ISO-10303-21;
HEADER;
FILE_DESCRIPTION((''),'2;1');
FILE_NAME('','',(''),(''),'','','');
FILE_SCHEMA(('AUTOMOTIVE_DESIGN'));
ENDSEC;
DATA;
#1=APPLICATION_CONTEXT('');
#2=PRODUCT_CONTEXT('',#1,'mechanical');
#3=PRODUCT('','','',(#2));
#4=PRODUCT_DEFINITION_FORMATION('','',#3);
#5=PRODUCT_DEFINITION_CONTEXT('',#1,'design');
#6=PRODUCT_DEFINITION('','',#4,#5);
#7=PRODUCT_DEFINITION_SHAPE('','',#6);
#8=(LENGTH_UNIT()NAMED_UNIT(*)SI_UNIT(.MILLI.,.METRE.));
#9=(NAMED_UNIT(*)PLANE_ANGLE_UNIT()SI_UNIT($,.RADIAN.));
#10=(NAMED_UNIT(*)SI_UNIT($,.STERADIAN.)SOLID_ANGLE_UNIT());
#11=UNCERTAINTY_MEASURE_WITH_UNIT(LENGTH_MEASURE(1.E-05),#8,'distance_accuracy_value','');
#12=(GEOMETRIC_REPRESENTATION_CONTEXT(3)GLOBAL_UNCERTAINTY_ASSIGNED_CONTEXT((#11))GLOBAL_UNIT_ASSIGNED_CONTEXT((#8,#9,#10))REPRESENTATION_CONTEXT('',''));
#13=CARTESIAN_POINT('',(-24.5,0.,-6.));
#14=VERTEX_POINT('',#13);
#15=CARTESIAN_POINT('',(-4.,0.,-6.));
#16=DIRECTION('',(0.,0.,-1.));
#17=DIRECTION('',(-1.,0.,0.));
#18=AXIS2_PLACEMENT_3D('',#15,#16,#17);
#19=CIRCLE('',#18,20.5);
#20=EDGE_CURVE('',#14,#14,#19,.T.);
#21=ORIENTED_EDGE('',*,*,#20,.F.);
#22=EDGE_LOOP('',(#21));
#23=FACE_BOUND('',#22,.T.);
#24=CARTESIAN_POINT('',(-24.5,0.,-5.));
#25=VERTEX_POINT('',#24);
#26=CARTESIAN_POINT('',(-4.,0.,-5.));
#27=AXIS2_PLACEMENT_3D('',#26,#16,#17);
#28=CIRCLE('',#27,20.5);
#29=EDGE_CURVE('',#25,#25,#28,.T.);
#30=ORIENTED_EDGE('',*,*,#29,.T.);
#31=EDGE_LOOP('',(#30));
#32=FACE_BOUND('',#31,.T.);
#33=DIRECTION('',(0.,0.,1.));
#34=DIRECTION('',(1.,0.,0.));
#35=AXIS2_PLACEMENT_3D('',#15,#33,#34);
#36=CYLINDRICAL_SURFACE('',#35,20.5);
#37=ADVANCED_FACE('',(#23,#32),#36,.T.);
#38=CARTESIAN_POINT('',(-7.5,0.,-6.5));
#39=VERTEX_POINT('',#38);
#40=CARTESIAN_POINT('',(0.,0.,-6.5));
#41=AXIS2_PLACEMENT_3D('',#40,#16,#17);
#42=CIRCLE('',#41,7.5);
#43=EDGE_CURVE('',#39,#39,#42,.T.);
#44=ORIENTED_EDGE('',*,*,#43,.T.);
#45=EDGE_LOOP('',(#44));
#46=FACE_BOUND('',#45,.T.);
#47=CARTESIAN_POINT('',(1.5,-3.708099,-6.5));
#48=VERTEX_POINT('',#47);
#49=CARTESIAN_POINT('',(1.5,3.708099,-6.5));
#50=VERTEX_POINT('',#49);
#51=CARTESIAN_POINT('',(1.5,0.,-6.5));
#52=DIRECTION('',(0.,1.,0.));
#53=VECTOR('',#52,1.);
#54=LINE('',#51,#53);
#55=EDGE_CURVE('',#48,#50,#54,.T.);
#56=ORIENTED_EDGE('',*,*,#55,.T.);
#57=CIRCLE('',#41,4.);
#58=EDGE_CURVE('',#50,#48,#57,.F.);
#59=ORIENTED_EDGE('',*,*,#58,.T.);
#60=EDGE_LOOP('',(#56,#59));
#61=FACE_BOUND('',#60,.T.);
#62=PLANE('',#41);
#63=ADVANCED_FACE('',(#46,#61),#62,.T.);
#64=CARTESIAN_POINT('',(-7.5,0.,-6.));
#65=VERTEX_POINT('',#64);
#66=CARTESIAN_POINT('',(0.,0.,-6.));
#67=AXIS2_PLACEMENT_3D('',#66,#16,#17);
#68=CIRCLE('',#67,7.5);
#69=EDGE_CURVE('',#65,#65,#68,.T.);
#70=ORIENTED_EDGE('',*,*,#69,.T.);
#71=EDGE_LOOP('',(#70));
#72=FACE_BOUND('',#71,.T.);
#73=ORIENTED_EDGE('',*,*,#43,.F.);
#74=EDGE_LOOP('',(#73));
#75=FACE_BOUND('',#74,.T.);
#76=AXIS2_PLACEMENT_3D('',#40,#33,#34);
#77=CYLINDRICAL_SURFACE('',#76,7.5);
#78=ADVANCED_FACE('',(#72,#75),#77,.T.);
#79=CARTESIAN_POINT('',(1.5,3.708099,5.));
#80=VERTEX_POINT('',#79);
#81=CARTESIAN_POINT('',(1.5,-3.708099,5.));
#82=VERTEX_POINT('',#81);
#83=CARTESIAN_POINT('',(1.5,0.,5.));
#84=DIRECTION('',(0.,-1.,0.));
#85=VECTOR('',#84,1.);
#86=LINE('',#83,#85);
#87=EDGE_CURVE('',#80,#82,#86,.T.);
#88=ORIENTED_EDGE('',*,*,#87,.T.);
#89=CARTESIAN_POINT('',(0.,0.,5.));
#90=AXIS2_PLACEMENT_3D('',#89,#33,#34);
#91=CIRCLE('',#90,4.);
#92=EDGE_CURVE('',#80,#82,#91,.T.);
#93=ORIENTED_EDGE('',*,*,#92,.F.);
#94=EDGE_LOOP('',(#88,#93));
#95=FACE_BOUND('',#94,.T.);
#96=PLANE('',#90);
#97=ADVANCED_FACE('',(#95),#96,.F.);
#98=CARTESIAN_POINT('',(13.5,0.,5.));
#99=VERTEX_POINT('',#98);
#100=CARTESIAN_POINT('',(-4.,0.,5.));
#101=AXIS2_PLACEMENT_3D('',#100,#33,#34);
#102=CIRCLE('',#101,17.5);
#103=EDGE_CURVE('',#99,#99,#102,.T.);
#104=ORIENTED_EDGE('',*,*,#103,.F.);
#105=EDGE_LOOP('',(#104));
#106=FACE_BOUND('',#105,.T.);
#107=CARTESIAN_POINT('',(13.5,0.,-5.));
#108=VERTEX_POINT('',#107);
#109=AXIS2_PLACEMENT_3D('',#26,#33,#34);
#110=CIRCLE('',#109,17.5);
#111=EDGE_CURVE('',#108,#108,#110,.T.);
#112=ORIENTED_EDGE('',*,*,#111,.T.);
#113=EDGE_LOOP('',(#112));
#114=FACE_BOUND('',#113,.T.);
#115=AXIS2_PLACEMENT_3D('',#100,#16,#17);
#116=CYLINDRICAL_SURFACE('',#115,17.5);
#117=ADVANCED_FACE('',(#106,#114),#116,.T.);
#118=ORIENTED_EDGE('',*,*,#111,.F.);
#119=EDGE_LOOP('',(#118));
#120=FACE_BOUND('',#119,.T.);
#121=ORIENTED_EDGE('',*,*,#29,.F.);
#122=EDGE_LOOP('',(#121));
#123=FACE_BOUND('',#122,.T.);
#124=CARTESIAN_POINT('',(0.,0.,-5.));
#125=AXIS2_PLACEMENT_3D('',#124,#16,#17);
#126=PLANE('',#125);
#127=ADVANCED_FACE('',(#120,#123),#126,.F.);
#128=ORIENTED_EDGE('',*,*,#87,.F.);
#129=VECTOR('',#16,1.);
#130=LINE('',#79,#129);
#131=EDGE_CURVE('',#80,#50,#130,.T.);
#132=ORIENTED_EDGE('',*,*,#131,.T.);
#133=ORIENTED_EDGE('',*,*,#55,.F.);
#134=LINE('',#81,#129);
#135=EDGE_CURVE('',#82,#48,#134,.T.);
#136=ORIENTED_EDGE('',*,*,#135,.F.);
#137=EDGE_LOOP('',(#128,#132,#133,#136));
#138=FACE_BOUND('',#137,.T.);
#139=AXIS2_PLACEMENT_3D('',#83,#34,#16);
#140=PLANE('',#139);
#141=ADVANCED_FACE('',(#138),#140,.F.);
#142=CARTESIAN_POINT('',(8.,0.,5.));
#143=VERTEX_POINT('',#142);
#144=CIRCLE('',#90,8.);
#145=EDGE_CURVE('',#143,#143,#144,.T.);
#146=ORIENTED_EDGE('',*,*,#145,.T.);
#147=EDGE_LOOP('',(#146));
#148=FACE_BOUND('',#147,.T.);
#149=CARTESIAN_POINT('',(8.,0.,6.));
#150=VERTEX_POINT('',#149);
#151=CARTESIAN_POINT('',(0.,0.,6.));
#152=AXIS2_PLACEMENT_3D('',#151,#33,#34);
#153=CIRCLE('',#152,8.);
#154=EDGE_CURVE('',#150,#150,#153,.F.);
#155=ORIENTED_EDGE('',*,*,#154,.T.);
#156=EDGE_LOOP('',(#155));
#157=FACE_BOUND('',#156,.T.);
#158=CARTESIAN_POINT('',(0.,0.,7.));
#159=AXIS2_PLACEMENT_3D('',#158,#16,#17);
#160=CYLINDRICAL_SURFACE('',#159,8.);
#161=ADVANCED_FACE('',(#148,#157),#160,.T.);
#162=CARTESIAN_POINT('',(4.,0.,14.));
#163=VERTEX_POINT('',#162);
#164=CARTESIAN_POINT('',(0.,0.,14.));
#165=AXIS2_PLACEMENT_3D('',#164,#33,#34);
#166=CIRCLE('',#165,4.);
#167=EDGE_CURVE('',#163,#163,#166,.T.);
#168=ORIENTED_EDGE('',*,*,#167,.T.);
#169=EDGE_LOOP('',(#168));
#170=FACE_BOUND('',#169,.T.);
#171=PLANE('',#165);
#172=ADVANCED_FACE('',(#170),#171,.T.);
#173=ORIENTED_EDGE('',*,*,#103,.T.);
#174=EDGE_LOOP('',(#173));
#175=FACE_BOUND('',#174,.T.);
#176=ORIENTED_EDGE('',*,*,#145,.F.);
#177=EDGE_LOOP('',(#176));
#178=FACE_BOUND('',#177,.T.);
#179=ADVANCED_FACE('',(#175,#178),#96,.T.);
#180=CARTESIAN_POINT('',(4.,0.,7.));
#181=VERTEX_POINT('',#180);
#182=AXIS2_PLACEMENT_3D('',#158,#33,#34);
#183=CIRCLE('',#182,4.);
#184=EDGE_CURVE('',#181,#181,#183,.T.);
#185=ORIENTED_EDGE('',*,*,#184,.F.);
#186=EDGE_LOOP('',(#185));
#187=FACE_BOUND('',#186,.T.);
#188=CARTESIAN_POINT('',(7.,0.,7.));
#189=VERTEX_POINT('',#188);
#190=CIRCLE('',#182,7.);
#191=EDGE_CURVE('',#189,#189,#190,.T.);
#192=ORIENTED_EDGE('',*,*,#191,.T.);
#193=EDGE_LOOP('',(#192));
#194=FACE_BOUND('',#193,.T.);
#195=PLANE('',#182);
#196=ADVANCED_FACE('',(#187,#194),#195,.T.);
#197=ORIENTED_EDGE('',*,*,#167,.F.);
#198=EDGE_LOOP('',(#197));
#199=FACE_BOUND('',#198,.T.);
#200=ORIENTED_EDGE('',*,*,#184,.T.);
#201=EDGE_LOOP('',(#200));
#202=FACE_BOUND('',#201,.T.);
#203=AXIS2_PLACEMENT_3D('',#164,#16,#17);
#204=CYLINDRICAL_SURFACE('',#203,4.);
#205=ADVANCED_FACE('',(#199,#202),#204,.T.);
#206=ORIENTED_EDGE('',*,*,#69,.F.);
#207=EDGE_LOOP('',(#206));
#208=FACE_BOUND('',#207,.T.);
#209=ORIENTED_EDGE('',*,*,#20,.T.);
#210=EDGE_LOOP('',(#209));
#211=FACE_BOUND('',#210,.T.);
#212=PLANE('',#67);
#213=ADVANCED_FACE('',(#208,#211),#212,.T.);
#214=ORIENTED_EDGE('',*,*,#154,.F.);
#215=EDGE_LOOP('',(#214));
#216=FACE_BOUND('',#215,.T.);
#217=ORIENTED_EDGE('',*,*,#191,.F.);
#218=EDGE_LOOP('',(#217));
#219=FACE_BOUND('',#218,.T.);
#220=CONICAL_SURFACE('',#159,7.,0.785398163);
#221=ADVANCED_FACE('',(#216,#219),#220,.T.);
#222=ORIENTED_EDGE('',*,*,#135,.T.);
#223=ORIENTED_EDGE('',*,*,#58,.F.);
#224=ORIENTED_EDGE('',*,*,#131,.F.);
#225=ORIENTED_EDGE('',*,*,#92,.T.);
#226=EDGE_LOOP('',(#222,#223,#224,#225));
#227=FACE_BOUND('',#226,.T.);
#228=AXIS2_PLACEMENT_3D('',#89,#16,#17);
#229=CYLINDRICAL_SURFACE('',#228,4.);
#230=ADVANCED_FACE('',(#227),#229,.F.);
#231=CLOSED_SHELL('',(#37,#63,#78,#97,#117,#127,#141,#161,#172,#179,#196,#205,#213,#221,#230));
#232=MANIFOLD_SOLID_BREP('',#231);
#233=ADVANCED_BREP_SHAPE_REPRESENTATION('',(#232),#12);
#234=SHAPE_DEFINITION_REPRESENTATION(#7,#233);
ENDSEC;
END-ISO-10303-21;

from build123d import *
from build123d.topology import SkipClean

# Parameters (mm, degrees)
SKETCH1_R               = 17.5
BOSS_EXTRUDE1_DEPTH     = 5
SKETCH3_R               = 20.5
SKETCH3_R_2             = 17.5
BOSS_EXTRUDE3_DEPTH     = 1
BOSS_EXTRUDE2_OUTLINE_R = 7.5
BOSS_EXTRUDE2_DEPTH     = 0.5
SKETCH4_R               = 8
BOSS_EXTRUDE5_DEPTH     = 2
BOSS_EXTRUDE6_START     = 7
SKETCH5_R               = 4
BOSS_EXTRUDE6_DEPTH     = 7
CHAMFER1_SIZE           = 1


# Read off the part's stored shape, not the designer's step: Boss-Extrude2
with BuildPart() as part:
    # Sketch1 → Boss-Extrude1 (new, symmetric)
    with BuildSketch(Plane.XY):
        with Locations((-4, 0)):
            Circle(SKETCH1_R)
        with BuildLine():
            Line((1.5, 3.708099244), (1.5, -3.708099244))
            ThreePointArc((1.5, -3.708099244), (-4, 0), (1.5, 3.708099244))
        make_face(mode=Mode.SUBTRACT)
    extrude(amount=BOSS_EXTRUDE1_DEPTH, both=True)

    # Sketch3 → Boss-Extrude3 (add)
    # profile 1 of 2: a face of its own
    with SkipClean():  # the faces are left unmerged after this step: merging them gives an invalid solid
        with BuildSketch(Plane(origin=(0, 0, -5), x_dir=(-1, 0, 0), z_dir=(0, 0, -1))):
            with Locations((4, 0)):
                Circle(SKETCH3_R)
            with Locations(Location((4, 0, 0), (0, 0, 180))):
                Circle(SKETCH3_R_2, mode=Mode.SUBTRACT)
        # profile 2 of 2: a face of its own
        with BuildSketch(Plane(origin=(0, 0, -5), x_dir=(-1, 0, 0), z_dir=(0, 0, -1))):
            with Locations(Location((4, 0, 0), (0, 0, 180))):
                Circle(SKETCH3_R_2)
            with BuildLine():
                Line((-1.5, -3.708099244), (-1.5, 3.708099244))
                ThreePointArc((-1.5, 3.708099244), (4, 0), (-1.5, -3.708099244))
            make_face(mode=Mode.SUBTRACT)
        extrude(amount=BOSS_EXTRUDE3_DEPTH)

    # Boss-Extrude2 outline → Boss-Extrude2 (add)
    with SkipClean():  # the faces are left unmerged after this step: merging them gives an invalid solid
        with BuildSketch(Plane(origin=(0, 0, -6), x_dir=(-1, 0, 0), z_dir=(0, 0, -1))):
            Circle(BOSS_EXTRUDE2_OUTLINE_R)
            with BuildLine():
                ThreePointArc((-1.5, 3.708099244), (4, 0), (-1.5, -3.708099244))
                Line((-1.5, -3.708099244), (-1.5, 3.708099244))
            make_face(mode=Mode.SUBTRACT)
        extrude(amount=BOSS_EXTRUDE2_DEPTH)

    # Sketch4 → Boss-Extrude5 (add)
    with SkipClean():  # the faces are left unmerged after this step: merging them gives an invalid solid
        with BuildSketch(Plane.XY.offset(5)):
            Circle(SKETCH4_R)
        extrude(amount=BOSS_EXTRUDE5_DEPTH)

    # Sketch5 → Boss-Extrude6 (add)
    with SkipClean():  # the faces are left unmerged after this step: merging them gives an invalid solid
        with BuildSketch(Plane.XY.offset(7).offset(BOSS_EXTRUDE6_START)):
            Circle(SKETCH5_R)
        extrude(amount=-BOSS_EXTRUDE6_DEPTH)

    # Chamfer1
    chamfer1_edges = [part.edges().sort_by_distance(p)[0] for p in [
        (-8, 0, 7),
    ]]
    chamfer(chamfer1_edges, length=CHAMFER1_SIZE)


solid = part.part
